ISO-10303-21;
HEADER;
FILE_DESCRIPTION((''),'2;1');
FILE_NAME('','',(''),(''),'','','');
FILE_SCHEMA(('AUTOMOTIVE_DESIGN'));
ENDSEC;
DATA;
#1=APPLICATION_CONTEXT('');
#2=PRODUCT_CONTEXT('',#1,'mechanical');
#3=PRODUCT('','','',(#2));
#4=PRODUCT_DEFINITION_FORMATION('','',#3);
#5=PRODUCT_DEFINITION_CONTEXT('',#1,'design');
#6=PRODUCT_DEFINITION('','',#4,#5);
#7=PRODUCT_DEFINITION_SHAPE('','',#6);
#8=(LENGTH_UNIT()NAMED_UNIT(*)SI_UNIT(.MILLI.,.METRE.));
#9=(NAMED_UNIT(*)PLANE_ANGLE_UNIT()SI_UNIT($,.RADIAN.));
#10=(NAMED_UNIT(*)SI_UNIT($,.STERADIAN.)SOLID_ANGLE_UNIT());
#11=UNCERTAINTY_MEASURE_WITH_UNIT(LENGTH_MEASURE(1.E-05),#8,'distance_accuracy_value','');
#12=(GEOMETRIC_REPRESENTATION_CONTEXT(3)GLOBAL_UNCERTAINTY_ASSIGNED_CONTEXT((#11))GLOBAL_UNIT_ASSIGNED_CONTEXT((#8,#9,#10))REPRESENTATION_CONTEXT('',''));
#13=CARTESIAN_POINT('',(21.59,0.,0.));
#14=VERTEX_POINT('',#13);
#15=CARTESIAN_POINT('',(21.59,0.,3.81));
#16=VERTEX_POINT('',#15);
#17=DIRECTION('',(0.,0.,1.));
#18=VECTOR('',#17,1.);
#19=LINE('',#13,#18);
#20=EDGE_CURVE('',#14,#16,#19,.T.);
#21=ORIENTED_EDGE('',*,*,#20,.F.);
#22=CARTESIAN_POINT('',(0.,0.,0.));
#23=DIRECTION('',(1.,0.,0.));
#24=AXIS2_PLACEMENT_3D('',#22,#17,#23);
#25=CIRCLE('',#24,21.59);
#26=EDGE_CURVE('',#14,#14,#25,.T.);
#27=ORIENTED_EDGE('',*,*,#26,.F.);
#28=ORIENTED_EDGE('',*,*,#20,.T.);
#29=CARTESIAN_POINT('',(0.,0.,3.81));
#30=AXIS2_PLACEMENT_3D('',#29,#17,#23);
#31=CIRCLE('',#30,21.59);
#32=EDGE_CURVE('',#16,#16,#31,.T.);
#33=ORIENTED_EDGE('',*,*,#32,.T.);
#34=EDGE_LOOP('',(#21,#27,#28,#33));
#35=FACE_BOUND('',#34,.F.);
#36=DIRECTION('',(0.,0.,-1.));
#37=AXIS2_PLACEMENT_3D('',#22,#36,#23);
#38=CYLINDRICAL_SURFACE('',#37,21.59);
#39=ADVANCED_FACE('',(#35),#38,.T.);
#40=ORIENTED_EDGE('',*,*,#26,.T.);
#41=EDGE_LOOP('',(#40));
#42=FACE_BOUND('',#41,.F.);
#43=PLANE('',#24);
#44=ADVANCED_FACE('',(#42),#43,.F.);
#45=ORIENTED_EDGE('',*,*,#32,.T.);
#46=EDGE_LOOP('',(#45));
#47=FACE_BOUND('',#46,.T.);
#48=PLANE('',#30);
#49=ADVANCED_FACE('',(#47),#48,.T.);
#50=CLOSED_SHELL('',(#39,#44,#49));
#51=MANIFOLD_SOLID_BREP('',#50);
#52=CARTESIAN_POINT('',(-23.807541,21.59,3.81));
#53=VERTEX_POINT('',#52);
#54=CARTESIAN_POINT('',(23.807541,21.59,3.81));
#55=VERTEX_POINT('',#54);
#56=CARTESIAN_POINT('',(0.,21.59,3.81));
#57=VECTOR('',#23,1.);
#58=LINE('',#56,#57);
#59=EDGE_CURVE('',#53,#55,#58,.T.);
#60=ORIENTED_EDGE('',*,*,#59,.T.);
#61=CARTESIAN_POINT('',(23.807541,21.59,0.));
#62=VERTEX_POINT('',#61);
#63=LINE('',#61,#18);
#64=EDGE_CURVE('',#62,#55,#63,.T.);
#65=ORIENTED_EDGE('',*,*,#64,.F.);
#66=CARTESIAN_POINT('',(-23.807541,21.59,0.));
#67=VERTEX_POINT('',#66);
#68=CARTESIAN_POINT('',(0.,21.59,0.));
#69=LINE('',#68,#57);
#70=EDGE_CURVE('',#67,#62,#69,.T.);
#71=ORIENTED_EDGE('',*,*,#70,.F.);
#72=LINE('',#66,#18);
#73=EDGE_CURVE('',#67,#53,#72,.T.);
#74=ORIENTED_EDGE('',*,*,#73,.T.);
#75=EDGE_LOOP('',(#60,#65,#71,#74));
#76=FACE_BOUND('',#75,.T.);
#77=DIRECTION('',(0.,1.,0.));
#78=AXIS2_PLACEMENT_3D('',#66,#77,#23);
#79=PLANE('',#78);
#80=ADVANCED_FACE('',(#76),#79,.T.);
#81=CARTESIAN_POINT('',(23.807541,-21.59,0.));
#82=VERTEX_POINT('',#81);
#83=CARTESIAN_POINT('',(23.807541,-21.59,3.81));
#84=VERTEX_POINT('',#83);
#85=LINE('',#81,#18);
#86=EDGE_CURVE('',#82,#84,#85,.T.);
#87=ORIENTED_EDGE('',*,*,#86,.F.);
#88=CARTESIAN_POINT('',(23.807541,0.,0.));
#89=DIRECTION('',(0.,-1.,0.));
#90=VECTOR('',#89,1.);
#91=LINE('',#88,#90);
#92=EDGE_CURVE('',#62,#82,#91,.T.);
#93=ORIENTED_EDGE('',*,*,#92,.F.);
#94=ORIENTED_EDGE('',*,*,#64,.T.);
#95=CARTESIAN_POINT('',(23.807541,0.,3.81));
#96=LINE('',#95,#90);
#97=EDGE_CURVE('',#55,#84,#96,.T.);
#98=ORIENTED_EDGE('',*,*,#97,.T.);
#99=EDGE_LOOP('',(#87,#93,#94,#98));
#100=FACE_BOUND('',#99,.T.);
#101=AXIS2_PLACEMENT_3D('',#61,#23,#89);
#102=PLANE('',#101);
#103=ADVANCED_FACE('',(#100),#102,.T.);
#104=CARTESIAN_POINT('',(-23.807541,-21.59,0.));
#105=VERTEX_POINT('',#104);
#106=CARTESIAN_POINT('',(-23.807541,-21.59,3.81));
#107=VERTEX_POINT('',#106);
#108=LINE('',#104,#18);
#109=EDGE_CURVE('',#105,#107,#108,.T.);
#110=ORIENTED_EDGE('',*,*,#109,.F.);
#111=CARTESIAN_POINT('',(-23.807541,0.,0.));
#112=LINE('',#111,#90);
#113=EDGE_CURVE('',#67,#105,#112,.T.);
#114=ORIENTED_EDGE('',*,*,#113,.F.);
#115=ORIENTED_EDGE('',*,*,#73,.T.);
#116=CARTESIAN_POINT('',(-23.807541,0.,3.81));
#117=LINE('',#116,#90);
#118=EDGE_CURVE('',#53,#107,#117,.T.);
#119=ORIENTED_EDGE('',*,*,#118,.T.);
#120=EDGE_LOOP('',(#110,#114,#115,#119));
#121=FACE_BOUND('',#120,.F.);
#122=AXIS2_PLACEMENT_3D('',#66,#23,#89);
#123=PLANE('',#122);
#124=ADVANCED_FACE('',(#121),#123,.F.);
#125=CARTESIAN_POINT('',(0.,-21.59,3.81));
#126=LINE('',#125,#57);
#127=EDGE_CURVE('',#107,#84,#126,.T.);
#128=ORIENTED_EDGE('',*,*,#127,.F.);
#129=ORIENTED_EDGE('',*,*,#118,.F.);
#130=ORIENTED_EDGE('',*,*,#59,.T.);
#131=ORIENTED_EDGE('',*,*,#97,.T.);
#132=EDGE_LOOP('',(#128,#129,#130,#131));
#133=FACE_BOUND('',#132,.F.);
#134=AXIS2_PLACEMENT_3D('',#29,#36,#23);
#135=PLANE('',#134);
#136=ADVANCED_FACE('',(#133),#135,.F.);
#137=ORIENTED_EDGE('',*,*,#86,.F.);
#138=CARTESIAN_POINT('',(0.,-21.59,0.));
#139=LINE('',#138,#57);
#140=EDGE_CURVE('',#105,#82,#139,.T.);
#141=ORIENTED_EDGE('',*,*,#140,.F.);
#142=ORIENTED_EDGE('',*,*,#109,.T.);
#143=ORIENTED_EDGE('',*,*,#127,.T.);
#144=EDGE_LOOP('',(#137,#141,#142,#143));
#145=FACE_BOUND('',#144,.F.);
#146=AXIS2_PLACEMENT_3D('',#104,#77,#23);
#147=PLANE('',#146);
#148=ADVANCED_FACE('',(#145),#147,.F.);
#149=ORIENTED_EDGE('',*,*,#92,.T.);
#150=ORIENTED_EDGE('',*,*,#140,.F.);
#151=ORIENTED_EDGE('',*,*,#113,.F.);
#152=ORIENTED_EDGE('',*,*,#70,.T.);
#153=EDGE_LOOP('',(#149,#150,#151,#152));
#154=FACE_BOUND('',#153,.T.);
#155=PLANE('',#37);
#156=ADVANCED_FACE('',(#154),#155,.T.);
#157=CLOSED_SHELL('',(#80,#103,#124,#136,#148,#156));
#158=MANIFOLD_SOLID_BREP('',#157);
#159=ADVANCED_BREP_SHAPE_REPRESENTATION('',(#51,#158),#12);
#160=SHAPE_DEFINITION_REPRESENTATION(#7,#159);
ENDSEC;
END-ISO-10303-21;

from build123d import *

# Parameters (mm, degrees)
F0_R     = 21.59
F1_DEPTH = 3.81
F2_W     = 47.6150820366
F2_H     = 43.18
F3_DEPTH = 3.81


# Not quite as in the source:
# - a feature of the source that left no trace in its solid (it failed there, or was rolled back) is left out


with BuildPart() as f1:
    # F0 (on Top) → F1 (new body)
    with BuildSketch(Plane.XY):
        Circle(F0_R)
    extrude(amount=F1_DEPTH)


with BuildPart() as f3:
    # F2 (on face) → F3 (new body)
    with BuildSketch(Plane(origin=(0, 0, 0), x_dir=(1, 0, 0), z_dir=(0, 0, -1))):
        Rectangle(F2_W, F2_H)
    extrude(amount=-F3_DEPTH)


solid = Compound([f1.part, f3.part])
